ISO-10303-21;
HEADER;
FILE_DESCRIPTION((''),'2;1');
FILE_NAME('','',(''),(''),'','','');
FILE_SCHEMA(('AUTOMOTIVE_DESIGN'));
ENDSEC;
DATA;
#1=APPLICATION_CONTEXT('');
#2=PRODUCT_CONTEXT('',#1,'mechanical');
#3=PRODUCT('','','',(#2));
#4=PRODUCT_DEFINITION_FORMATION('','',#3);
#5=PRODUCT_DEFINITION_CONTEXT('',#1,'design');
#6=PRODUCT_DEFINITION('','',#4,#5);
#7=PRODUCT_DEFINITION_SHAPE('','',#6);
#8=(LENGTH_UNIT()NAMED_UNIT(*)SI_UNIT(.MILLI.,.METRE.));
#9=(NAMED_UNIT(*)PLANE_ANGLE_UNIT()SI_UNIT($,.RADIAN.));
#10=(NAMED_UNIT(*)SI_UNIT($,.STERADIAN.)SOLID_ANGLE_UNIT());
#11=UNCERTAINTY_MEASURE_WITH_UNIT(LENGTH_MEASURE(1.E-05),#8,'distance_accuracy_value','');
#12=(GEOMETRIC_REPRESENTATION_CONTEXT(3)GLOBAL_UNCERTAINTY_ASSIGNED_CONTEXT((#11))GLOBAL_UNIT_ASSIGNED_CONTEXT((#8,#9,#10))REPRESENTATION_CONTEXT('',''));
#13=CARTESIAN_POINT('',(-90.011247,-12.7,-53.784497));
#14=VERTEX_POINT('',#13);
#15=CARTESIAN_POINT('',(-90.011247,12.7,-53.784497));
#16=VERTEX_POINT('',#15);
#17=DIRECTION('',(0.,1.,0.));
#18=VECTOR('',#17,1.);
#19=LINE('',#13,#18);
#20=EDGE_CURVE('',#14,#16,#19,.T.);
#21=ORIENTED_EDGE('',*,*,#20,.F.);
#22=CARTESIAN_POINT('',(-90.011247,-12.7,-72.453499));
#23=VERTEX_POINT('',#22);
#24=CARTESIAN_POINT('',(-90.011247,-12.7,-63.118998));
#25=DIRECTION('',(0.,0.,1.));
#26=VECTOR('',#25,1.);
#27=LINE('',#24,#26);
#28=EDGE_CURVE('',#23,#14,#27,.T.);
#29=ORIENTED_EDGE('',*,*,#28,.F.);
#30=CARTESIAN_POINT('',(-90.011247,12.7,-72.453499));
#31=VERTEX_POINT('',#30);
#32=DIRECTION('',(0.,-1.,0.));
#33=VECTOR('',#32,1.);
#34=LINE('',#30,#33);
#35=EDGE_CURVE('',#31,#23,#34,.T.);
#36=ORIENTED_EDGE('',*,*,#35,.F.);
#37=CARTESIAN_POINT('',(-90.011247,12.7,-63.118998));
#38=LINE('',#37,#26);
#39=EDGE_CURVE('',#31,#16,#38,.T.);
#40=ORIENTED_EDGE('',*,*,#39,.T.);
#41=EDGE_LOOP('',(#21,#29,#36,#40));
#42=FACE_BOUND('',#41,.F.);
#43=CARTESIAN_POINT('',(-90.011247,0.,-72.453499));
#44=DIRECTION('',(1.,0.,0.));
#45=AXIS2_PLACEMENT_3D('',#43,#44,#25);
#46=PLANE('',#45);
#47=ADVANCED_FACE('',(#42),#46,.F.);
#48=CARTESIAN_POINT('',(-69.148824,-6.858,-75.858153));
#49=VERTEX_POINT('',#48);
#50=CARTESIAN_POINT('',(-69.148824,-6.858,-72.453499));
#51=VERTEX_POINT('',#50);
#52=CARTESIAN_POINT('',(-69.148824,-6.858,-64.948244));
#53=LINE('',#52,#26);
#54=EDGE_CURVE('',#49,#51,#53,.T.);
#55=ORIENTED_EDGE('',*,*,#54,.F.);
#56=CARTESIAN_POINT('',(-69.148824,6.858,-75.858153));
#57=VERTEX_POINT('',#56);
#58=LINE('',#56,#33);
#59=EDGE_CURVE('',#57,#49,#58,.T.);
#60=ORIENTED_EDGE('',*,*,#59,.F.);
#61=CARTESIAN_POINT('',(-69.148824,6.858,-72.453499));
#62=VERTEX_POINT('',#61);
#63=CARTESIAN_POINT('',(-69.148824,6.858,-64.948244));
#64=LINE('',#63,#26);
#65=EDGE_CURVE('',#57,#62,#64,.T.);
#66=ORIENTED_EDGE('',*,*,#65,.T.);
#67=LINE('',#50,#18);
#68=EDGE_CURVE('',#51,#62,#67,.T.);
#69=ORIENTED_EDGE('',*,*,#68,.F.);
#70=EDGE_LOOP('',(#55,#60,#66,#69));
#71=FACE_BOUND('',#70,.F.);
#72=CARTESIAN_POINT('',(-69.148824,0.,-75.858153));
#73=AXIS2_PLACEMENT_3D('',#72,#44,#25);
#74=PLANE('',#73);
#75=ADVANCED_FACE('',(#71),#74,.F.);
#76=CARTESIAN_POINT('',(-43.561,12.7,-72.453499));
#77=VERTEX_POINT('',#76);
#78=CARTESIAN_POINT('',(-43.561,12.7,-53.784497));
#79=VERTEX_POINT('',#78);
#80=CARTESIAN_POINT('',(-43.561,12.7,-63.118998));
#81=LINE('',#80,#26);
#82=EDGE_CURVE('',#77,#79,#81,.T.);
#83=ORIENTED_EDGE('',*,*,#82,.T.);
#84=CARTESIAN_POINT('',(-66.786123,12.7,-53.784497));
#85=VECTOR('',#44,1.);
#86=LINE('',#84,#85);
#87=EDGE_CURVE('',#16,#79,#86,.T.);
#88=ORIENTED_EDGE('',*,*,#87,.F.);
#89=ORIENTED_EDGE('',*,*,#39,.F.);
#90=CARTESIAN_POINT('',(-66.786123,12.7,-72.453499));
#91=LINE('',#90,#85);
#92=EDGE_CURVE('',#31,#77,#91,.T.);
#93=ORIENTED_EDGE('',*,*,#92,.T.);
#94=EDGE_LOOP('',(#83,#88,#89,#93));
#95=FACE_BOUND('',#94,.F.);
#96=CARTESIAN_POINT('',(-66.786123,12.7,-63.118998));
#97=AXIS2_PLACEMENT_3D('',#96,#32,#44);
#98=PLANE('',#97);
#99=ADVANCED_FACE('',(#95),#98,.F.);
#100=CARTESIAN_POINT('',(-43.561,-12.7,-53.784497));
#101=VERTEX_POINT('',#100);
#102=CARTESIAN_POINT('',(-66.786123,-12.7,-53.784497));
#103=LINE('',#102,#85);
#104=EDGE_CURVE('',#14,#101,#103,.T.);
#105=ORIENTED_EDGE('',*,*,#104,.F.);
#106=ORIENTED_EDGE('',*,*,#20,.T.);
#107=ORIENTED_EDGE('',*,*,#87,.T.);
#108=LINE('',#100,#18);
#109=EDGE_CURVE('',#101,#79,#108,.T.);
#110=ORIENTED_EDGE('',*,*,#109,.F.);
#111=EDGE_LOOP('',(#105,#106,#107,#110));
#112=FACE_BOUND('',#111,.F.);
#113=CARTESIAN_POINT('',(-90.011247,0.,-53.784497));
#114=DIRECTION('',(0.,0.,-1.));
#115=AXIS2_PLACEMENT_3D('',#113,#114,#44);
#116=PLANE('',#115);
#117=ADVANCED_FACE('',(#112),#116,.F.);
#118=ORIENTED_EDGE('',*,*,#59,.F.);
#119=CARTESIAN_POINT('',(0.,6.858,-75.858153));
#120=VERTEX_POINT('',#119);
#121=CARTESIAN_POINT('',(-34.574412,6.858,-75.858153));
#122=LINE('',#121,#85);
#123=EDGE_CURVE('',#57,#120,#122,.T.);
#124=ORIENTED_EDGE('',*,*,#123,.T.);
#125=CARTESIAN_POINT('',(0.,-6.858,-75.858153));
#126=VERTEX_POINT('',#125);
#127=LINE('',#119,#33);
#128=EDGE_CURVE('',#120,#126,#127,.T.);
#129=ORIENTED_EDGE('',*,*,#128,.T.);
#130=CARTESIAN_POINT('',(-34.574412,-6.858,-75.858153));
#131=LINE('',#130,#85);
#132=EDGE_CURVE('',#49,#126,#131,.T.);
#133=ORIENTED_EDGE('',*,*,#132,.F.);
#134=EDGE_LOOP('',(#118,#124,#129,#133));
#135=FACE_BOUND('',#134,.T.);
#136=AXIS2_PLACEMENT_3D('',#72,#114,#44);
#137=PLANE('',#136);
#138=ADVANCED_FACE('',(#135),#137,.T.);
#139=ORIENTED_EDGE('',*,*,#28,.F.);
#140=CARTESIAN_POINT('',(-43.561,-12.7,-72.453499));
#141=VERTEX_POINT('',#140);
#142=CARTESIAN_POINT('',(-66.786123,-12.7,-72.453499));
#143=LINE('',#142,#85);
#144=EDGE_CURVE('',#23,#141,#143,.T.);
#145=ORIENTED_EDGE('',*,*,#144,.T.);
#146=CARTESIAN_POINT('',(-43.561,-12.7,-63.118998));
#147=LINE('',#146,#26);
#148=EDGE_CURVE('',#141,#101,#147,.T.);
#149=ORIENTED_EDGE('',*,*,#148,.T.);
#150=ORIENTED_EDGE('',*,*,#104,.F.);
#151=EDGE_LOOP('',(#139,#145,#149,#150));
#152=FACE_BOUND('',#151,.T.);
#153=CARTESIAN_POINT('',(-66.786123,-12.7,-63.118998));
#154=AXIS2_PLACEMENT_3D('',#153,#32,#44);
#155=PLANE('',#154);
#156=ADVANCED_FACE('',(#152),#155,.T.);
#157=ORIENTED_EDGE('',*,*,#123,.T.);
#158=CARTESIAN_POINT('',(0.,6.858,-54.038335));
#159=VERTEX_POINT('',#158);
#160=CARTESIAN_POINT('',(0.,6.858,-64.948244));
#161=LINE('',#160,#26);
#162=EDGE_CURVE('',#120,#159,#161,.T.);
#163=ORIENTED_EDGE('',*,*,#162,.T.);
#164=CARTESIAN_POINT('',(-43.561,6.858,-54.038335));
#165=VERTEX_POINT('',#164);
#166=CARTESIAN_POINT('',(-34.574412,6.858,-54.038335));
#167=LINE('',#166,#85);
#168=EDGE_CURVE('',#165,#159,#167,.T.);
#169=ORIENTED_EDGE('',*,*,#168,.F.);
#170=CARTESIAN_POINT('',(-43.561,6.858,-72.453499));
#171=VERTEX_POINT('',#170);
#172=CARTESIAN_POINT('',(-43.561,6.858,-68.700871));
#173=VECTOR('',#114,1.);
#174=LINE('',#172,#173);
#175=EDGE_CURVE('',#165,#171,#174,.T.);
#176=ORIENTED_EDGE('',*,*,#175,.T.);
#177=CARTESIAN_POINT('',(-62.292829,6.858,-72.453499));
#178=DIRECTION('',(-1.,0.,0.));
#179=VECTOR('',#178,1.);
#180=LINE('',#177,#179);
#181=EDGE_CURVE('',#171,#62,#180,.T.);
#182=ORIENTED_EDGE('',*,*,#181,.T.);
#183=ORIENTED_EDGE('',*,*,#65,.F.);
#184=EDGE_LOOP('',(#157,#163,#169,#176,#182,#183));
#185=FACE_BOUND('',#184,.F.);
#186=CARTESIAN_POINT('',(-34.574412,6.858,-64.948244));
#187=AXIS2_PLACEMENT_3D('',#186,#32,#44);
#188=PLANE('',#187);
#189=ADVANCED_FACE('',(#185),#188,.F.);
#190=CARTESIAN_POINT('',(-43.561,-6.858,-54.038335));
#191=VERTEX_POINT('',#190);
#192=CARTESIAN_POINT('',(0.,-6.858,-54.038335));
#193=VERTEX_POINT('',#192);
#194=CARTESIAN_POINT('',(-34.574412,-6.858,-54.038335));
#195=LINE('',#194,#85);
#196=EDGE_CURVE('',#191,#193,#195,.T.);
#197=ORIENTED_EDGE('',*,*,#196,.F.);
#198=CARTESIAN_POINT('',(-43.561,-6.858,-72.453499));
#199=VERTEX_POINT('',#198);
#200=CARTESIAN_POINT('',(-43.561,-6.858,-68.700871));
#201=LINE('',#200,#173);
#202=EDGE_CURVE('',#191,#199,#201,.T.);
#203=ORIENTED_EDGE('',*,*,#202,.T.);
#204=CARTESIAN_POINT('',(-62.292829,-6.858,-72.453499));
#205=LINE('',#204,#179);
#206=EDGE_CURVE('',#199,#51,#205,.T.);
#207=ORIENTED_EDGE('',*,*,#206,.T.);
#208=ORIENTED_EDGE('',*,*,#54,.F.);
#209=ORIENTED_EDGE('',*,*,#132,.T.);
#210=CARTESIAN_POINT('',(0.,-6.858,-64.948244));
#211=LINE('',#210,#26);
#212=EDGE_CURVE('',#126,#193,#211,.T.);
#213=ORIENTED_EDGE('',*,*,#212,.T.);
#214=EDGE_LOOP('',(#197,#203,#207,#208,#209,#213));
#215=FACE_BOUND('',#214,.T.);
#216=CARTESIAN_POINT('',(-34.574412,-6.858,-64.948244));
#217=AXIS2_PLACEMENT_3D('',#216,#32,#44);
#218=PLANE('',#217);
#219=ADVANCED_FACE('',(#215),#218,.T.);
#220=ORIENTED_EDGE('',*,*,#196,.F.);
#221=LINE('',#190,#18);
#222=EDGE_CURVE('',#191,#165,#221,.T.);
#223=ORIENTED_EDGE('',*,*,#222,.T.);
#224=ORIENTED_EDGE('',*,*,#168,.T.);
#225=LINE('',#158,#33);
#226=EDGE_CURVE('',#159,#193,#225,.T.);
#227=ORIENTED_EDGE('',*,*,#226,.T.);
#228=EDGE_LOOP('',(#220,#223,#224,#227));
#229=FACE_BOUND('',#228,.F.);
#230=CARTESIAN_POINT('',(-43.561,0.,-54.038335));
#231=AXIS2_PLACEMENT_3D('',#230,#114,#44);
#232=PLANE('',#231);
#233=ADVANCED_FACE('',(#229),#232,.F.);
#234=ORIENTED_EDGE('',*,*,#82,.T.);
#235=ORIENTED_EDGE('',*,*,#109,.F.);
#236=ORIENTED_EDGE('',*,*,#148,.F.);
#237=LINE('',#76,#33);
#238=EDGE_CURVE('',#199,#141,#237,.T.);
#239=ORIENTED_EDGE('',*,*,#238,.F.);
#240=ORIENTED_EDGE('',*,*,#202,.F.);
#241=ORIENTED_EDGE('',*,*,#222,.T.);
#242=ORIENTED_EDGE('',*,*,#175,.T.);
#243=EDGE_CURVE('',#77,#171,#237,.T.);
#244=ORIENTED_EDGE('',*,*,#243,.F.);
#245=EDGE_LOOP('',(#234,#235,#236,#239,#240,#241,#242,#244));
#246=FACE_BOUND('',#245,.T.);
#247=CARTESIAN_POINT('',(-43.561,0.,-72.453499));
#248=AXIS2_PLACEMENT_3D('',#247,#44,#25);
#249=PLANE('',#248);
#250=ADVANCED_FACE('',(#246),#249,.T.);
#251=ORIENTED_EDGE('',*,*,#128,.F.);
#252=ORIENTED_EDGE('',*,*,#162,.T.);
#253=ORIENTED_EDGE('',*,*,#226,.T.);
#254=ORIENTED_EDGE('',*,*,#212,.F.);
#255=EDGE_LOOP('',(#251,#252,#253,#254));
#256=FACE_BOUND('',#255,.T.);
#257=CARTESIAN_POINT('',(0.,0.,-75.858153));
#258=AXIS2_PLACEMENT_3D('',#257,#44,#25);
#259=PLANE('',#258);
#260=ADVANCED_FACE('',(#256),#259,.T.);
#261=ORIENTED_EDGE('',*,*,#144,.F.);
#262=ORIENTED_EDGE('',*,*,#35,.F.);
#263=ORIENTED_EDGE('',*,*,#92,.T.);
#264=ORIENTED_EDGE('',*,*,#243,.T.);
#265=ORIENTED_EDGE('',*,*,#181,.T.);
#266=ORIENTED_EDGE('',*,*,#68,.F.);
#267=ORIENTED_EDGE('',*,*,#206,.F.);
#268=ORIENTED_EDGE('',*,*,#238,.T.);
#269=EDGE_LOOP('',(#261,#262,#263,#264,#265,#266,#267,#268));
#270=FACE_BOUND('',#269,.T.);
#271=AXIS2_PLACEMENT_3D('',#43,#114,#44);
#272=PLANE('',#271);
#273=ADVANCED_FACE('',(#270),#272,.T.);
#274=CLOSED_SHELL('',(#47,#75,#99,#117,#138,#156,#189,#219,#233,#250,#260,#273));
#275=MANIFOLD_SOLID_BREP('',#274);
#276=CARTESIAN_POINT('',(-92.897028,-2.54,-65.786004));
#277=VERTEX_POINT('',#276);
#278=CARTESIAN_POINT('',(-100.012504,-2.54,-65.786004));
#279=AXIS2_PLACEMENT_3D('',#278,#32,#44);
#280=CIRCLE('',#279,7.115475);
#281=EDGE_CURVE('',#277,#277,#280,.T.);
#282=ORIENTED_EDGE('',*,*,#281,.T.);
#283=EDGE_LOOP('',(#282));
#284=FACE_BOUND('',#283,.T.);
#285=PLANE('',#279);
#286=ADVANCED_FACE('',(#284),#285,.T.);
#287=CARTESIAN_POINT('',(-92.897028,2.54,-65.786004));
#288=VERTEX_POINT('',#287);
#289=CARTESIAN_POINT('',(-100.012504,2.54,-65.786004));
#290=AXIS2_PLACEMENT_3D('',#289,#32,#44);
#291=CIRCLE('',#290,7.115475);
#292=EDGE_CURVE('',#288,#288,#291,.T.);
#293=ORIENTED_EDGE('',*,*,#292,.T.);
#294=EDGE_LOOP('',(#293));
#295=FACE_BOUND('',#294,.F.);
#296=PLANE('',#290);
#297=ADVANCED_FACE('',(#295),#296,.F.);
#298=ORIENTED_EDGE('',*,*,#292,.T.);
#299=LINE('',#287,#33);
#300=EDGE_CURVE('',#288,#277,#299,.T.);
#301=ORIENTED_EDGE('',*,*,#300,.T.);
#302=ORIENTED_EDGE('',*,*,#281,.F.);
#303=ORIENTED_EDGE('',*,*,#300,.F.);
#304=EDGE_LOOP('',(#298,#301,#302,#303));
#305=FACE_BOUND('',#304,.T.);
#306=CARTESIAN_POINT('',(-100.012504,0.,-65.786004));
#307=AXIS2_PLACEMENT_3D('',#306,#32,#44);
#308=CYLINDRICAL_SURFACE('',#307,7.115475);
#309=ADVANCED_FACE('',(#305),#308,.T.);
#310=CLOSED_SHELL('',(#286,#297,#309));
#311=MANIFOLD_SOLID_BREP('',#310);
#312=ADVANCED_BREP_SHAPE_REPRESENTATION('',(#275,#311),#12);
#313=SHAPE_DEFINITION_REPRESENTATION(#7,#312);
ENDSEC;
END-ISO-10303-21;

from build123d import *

# Parameters (mm, degrees)
F0_W     = 46.4502461255
F0_H     = 18.6690017581
F3_DEPTH = 12.7
F4_DEPTH = 12.7
F1_R     = 7.1154754627
F5_DEPTH = 2.54
F6_DEPTH = 2.54
F2_W     = 69.1488236189
F2_H     = 21.8198187649
F7_DEPTH = 6.858
F8_DEPTH = 6.858


# Not quite as in the source:
# - the program builds the solid bodies; features that only make, move or delete a surface that nothing else refers to are left out


with BuildPart() as f3:
    # F0 (on Front) → F3 (new body)
    with BuildSketch(Plane.XZ):
        with Locations((-66.7861234397, -63.1189979613)):
            Rectangle(F0_W, F0_H)
    extrude(amount=F3_DEPTH)

    # F4 (add): a face of the model
    f4_faces = [f3.faces().sort_by_distance(p)[0] for p in [
        (-66.7861234397, 0, -63.1189979613),
    ]]
    extrude(f4_faces, amount=F4_DEPTH)

    # F2 (on Front) → F7 (join)
    with BuildSketch(Plane.XZ):
        with Locations((-34.5744118094, -64.9482440203)):
            Rectangle(F2_W, F2_H)
    extrude(amount=F7_DEPTH)

    # F8 (add): a face of the model
    f8_faces = [f3.faces().sort_by_distance(p)[0] for p in [
        (-24.68336426, 0, -65.7213116697),
    ]]
    extrude(f8_faces, amount=F8_DEPTH)


with BuildPart() as f5:
    # F1 (on Front) → F5 (new body)
    with BuildSketch(Plane.XZ):
        with Locations((-100.0125035644, -65.7860040665)):
            Circle(F1_R)
    extrude(amount=F5_DEPTH)

    # F6 (add): a face of the model
    f6_faces = [f5.faces().sort_by_distance(p)[0] for p in [
        (-100.0125035644, 0, -65.7860040665),
    ]]
    extrude(f6_faces, amount=F6_DEPTH)


solid = Compound([f3.part, f5.part])
